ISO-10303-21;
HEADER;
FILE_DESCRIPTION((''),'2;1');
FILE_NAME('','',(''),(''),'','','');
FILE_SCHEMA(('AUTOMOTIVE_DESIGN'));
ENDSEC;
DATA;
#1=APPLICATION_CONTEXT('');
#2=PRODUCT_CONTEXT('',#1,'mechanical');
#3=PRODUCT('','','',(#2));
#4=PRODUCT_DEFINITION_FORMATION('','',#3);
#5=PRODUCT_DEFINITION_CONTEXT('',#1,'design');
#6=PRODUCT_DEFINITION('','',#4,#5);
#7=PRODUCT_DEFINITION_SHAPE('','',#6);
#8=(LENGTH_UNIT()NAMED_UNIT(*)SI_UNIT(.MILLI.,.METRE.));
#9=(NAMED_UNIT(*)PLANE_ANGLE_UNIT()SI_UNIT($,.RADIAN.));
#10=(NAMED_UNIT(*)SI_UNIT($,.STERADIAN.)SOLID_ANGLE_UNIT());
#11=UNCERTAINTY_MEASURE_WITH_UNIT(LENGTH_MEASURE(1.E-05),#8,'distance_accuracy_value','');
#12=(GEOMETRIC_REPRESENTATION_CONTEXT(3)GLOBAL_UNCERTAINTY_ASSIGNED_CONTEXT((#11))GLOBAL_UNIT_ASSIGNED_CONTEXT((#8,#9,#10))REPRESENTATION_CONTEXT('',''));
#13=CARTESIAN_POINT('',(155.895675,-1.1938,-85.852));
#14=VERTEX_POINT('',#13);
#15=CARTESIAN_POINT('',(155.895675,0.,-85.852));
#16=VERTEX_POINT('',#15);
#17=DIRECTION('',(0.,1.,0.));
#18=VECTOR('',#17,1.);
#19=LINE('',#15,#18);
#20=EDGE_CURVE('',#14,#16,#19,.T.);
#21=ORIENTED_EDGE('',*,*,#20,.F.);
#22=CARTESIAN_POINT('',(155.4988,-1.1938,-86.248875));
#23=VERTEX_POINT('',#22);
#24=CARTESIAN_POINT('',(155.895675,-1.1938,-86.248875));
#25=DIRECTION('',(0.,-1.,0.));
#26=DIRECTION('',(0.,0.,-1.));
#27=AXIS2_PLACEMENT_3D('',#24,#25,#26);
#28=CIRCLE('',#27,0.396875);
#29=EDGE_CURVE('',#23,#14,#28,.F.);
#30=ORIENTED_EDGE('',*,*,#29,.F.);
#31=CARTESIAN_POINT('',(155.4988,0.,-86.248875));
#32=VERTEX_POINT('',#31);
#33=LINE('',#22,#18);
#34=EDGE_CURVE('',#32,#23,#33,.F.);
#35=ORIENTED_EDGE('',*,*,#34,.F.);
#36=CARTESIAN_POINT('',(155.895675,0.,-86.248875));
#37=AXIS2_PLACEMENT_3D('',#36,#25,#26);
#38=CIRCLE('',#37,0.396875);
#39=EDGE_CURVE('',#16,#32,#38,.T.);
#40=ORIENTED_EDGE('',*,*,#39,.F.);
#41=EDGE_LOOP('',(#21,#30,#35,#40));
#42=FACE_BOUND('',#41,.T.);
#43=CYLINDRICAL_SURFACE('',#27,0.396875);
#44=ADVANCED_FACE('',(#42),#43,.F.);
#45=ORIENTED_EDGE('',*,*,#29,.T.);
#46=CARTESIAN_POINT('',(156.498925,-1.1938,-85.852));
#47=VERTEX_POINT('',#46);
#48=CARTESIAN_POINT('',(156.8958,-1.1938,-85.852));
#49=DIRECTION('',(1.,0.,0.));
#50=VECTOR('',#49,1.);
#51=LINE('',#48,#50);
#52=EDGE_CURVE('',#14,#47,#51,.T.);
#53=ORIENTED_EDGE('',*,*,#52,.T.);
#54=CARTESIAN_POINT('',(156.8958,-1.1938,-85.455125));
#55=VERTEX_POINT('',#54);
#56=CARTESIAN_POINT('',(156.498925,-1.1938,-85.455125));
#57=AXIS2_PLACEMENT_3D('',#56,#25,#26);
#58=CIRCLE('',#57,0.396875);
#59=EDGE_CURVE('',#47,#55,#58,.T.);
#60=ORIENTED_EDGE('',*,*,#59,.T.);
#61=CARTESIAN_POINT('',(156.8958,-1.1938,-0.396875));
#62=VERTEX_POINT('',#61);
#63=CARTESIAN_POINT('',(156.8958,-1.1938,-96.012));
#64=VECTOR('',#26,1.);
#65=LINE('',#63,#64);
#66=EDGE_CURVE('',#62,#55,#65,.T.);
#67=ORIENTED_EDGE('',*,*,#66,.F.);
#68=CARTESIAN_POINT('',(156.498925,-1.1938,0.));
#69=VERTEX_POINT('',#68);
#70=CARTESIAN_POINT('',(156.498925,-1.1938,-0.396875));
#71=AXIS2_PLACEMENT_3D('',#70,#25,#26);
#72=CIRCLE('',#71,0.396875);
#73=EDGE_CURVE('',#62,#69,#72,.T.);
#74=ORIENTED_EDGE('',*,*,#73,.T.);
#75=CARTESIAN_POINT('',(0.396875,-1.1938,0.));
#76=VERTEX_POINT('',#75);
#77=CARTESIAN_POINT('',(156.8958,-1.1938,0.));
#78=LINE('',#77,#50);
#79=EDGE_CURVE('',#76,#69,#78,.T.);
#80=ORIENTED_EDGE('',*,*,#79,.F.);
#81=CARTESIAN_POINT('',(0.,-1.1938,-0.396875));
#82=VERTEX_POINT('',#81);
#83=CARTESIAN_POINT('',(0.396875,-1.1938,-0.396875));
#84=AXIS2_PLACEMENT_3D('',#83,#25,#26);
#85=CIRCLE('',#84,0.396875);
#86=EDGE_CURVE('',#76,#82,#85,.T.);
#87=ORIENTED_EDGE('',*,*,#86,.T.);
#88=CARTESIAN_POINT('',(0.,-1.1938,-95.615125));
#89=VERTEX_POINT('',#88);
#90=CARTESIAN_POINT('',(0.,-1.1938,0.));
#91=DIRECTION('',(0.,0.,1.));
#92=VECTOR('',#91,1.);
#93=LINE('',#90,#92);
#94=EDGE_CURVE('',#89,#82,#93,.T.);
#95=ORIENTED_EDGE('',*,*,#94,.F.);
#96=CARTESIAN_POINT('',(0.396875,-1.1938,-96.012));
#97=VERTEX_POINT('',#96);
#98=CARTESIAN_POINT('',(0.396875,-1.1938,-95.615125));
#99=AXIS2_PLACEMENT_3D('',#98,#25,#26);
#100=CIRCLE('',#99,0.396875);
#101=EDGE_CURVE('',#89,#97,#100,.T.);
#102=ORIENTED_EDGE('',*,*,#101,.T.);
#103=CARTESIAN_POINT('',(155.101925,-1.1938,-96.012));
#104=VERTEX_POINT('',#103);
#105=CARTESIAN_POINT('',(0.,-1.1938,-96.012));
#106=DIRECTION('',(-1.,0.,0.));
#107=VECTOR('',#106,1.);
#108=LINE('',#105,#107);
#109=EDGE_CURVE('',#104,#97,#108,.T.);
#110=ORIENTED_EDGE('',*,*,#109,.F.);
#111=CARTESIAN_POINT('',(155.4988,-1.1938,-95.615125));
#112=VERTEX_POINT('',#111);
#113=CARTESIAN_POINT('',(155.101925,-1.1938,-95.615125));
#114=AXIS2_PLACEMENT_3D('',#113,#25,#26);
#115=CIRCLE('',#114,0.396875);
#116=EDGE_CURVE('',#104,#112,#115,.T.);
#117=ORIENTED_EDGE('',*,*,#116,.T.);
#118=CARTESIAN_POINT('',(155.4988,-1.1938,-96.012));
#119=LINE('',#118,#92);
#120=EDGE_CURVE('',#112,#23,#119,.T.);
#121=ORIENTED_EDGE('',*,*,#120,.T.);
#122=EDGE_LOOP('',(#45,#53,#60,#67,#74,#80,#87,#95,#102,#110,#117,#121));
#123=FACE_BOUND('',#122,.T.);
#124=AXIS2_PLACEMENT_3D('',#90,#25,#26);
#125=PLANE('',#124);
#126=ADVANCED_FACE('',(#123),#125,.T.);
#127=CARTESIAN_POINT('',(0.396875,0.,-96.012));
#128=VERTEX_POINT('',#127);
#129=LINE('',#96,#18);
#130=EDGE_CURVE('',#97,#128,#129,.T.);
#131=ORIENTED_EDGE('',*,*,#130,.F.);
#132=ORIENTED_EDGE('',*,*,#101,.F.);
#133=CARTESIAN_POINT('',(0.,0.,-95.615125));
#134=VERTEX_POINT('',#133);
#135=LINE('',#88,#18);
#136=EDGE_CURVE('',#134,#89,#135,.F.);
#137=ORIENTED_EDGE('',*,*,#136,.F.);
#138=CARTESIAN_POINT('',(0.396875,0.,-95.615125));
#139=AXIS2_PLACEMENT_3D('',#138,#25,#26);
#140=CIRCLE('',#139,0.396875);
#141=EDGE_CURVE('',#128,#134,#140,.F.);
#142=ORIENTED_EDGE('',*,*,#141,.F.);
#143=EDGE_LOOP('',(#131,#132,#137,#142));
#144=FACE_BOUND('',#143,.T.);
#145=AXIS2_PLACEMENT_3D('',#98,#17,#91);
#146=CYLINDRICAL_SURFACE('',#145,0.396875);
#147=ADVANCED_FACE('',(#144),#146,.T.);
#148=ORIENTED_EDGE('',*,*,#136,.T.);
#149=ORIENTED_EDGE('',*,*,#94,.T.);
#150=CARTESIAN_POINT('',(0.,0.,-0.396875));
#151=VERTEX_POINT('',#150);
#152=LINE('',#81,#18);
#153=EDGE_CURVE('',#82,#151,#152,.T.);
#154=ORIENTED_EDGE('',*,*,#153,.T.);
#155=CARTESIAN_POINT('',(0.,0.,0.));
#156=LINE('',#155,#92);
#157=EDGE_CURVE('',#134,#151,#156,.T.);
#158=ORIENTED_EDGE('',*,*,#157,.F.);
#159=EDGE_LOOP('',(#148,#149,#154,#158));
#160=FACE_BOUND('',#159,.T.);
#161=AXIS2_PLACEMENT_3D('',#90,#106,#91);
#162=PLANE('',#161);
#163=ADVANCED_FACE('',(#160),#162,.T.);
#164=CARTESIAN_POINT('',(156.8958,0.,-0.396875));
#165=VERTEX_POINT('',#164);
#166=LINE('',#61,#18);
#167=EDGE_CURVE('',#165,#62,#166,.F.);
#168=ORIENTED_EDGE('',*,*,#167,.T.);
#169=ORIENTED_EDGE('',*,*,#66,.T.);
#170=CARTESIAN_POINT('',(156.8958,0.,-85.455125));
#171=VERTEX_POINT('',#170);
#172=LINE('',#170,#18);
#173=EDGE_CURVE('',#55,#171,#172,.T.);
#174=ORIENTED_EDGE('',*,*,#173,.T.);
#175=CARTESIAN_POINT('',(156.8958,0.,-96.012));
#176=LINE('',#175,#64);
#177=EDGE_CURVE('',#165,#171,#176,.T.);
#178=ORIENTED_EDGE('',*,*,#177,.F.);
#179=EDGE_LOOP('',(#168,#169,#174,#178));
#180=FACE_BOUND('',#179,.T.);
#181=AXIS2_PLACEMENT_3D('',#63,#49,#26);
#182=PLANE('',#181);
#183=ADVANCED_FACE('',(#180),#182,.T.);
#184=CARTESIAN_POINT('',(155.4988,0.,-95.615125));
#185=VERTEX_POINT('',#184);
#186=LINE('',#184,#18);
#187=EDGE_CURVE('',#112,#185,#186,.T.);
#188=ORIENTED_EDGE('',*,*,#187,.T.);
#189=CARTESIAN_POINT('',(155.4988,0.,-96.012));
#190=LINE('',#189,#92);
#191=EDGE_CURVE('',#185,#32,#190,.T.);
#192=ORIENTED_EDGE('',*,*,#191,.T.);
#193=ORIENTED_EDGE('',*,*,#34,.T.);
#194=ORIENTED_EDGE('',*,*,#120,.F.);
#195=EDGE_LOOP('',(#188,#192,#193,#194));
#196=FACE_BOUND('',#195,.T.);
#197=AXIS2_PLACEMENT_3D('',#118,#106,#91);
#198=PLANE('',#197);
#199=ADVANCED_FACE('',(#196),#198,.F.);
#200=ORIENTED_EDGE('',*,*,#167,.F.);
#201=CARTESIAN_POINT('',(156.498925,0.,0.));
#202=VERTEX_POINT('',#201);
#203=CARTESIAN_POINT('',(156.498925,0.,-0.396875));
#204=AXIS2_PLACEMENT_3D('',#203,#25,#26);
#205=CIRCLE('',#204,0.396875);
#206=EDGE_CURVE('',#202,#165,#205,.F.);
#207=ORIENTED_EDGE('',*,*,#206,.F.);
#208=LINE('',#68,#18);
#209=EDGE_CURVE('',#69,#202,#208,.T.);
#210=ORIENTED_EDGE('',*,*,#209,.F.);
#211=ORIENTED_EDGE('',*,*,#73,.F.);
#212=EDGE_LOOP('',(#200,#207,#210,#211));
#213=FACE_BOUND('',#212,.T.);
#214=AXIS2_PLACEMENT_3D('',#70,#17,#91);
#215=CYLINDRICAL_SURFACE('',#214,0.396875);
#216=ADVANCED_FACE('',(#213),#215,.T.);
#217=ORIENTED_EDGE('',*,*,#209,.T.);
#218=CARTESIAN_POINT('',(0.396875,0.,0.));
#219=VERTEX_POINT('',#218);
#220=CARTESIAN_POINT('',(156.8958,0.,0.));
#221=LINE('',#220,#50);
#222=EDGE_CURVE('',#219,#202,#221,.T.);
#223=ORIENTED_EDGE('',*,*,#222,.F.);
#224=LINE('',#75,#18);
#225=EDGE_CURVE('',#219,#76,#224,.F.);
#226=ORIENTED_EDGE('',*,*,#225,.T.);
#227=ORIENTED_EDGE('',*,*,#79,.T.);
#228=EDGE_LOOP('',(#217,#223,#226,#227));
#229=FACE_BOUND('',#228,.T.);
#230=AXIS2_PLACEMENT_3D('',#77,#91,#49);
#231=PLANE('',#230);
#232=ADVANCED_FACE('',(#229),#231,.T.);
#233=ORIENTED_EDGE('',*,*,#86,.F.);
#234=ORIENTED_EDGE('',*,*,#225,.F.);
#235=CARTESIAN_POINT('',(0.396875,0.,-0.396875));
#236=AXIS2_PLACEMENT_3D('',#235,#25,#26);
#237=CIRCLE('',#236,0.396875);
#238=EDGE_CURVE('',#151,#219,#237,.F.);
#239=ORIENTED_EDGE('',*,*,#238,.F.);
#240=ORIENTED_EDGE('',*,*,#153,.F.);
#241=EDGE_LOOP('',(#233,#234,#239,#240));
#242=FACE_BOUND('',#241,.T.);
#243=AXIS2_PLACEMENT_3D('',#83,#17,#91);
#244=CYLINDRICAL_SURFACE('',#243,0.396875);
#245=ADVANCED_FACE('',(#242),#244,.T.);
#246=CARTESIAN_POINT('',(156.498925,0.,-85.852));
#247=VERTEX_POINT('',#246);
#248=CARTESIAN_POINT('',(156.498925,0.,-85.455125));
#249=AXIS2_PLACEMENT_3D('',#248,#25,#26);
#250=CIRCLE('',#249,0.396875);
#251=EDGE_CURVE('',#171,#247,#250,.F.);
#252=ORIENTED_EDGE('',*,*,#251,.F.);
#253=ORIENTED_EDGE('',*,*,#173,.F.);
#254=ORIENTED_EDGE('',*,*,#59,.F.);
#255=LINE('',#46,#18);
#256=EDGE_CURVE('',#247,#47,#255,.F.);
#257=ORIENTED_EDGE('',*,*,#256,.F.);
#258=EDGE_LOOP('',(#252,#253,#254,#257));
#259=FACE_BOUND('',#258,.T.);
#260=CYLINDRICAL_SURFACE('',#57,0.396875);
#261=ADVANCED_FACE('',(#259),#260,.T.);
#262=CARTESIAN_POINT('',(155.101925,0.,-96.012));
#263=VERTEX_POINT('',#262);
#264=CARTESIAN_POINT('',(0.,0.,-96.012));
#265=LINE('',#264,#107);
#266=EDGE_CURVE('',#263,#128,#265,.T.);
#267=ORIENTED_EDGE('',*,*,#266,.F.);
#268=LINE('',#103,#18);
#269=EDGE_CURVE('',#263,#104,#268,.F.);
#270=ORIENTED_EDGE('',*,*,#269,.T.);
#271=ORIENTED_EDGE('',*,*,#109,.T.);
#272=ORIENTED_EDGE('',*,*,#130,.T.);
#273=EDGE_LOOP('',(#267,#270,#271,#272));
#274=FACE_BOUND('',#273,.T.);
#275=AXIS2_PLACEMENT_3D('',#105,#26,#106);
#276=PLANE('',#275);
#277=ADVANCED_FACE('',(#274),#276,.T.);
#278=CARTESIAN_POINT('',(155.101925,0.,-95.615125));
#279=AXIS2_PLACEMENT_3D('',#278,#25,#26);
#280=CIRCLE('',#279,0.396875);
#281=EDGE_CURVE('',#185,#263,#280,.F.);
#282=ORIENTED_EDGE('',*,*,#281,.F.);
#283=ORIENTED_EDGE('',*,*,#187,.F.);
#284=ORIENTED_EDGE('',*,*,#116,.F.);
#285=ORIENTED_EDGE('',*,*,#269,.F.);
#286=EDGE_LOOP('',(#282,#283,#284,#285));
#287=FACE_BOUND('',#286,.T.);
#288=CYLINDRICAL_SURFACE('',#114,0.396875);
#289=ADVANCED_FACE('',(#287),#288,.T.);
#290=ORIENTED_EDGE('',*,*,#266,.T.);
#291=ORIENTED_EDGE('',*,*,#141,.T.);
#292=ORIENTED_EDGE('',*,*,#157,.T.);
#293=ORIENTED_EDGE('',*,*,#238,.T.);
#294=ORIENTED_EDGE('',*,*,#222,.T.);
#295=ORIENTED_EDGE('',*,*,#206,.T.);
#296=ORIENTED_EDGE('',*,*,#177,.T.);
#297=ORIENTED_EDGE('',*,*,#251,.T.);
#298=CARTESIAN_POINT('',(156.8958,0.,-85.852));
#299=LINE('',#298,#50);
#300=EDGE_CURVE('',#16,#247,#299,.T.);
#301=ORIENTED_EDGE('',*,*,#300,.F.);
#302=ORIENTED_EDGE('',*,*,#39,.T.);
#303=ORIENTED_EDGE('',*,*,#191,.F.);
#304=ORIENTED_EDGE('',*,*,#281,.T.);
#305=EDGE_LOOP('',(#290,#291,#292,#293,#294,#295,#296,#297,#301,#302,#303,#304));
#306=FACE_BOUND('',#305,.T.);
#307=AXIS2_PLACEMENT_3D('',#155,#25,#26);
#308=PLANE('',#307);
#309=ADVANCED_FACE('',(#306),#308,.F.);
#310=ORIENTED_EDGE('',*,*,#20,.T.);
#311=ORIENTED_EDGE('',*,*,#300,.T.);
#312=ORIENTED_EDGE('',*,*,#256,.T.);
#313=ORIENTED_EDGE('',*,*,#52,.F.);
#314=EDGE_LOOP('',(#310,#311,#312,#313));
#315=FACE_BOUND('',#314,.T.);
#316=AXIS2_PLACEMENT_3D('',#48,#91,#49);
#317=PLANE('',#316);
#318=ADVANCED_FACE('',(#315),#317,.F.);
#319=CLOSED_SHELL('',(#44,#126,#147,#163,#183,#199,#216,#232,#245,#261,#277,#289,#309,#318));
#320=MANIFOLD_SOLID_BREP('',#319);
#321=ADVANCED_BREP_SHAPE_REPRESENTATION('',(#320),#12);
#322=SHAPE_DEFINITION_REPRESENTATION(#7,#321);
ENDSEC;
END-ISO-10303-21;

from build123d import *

# Parameters (mm, degrees)
SKETCH1_W          = 156.8958
SKETCH1_H          = 96.012
BASE_FLANGE1_DEPTH = 1.1938
SKETCH6_W          = 1.397
SKETCH6_H          = 10.16
CUT_EXTRUDE1_DEPTH = 184.945702206
FILLET1_R          = 0.396875


# Sheet-metal steps are written as plain solids
with BuildPart() as part:
    # Sketch1 → Base-Flange1 (new body)
    with BuildSketch(Plane(origin=(0, 0, 0), x_dir=(1, 0, 0), z_dir=(0, 1, 0))):
        with Locations((78.4479, 48.006)):
            Rectangle(SKETCH1_W, SKETCH1_H)
    extrude(amount=-BASE_FLANGE1_DEPTH)

    # Sketch6 → Cut-Extrude1 (cut, through all)
    with BuildSketch(Plane(origin=(0, 0, 0), x_dir=(1, 0, 0), z_dir=(0, 1, 0))):
        with Locations((156.1973, 90.932)):
            Rectangle(SKETCH6_W, SKETCH6_H)
    extrude(amount=-CUT_EXTRUDE1_DEPTH, mode=Mode.SUBTRACT)

    # Fillet1
    fillet1_edges = [part.edges().sort_by_distance(p)[0] for p in [
        (156.8958, -0.5969, -85.852),
        (155.4988, -0.5969, -85.852),
        (155.4988, -0.5969, -96.012),
        (0, -0.5969, 0),
        (0, -0.5969, -96.012),
        (156.8958, -0.5969, 0),
    ]]
    fillet(fillet1_edges, radius=FILLET1_R)


solid = part.part
